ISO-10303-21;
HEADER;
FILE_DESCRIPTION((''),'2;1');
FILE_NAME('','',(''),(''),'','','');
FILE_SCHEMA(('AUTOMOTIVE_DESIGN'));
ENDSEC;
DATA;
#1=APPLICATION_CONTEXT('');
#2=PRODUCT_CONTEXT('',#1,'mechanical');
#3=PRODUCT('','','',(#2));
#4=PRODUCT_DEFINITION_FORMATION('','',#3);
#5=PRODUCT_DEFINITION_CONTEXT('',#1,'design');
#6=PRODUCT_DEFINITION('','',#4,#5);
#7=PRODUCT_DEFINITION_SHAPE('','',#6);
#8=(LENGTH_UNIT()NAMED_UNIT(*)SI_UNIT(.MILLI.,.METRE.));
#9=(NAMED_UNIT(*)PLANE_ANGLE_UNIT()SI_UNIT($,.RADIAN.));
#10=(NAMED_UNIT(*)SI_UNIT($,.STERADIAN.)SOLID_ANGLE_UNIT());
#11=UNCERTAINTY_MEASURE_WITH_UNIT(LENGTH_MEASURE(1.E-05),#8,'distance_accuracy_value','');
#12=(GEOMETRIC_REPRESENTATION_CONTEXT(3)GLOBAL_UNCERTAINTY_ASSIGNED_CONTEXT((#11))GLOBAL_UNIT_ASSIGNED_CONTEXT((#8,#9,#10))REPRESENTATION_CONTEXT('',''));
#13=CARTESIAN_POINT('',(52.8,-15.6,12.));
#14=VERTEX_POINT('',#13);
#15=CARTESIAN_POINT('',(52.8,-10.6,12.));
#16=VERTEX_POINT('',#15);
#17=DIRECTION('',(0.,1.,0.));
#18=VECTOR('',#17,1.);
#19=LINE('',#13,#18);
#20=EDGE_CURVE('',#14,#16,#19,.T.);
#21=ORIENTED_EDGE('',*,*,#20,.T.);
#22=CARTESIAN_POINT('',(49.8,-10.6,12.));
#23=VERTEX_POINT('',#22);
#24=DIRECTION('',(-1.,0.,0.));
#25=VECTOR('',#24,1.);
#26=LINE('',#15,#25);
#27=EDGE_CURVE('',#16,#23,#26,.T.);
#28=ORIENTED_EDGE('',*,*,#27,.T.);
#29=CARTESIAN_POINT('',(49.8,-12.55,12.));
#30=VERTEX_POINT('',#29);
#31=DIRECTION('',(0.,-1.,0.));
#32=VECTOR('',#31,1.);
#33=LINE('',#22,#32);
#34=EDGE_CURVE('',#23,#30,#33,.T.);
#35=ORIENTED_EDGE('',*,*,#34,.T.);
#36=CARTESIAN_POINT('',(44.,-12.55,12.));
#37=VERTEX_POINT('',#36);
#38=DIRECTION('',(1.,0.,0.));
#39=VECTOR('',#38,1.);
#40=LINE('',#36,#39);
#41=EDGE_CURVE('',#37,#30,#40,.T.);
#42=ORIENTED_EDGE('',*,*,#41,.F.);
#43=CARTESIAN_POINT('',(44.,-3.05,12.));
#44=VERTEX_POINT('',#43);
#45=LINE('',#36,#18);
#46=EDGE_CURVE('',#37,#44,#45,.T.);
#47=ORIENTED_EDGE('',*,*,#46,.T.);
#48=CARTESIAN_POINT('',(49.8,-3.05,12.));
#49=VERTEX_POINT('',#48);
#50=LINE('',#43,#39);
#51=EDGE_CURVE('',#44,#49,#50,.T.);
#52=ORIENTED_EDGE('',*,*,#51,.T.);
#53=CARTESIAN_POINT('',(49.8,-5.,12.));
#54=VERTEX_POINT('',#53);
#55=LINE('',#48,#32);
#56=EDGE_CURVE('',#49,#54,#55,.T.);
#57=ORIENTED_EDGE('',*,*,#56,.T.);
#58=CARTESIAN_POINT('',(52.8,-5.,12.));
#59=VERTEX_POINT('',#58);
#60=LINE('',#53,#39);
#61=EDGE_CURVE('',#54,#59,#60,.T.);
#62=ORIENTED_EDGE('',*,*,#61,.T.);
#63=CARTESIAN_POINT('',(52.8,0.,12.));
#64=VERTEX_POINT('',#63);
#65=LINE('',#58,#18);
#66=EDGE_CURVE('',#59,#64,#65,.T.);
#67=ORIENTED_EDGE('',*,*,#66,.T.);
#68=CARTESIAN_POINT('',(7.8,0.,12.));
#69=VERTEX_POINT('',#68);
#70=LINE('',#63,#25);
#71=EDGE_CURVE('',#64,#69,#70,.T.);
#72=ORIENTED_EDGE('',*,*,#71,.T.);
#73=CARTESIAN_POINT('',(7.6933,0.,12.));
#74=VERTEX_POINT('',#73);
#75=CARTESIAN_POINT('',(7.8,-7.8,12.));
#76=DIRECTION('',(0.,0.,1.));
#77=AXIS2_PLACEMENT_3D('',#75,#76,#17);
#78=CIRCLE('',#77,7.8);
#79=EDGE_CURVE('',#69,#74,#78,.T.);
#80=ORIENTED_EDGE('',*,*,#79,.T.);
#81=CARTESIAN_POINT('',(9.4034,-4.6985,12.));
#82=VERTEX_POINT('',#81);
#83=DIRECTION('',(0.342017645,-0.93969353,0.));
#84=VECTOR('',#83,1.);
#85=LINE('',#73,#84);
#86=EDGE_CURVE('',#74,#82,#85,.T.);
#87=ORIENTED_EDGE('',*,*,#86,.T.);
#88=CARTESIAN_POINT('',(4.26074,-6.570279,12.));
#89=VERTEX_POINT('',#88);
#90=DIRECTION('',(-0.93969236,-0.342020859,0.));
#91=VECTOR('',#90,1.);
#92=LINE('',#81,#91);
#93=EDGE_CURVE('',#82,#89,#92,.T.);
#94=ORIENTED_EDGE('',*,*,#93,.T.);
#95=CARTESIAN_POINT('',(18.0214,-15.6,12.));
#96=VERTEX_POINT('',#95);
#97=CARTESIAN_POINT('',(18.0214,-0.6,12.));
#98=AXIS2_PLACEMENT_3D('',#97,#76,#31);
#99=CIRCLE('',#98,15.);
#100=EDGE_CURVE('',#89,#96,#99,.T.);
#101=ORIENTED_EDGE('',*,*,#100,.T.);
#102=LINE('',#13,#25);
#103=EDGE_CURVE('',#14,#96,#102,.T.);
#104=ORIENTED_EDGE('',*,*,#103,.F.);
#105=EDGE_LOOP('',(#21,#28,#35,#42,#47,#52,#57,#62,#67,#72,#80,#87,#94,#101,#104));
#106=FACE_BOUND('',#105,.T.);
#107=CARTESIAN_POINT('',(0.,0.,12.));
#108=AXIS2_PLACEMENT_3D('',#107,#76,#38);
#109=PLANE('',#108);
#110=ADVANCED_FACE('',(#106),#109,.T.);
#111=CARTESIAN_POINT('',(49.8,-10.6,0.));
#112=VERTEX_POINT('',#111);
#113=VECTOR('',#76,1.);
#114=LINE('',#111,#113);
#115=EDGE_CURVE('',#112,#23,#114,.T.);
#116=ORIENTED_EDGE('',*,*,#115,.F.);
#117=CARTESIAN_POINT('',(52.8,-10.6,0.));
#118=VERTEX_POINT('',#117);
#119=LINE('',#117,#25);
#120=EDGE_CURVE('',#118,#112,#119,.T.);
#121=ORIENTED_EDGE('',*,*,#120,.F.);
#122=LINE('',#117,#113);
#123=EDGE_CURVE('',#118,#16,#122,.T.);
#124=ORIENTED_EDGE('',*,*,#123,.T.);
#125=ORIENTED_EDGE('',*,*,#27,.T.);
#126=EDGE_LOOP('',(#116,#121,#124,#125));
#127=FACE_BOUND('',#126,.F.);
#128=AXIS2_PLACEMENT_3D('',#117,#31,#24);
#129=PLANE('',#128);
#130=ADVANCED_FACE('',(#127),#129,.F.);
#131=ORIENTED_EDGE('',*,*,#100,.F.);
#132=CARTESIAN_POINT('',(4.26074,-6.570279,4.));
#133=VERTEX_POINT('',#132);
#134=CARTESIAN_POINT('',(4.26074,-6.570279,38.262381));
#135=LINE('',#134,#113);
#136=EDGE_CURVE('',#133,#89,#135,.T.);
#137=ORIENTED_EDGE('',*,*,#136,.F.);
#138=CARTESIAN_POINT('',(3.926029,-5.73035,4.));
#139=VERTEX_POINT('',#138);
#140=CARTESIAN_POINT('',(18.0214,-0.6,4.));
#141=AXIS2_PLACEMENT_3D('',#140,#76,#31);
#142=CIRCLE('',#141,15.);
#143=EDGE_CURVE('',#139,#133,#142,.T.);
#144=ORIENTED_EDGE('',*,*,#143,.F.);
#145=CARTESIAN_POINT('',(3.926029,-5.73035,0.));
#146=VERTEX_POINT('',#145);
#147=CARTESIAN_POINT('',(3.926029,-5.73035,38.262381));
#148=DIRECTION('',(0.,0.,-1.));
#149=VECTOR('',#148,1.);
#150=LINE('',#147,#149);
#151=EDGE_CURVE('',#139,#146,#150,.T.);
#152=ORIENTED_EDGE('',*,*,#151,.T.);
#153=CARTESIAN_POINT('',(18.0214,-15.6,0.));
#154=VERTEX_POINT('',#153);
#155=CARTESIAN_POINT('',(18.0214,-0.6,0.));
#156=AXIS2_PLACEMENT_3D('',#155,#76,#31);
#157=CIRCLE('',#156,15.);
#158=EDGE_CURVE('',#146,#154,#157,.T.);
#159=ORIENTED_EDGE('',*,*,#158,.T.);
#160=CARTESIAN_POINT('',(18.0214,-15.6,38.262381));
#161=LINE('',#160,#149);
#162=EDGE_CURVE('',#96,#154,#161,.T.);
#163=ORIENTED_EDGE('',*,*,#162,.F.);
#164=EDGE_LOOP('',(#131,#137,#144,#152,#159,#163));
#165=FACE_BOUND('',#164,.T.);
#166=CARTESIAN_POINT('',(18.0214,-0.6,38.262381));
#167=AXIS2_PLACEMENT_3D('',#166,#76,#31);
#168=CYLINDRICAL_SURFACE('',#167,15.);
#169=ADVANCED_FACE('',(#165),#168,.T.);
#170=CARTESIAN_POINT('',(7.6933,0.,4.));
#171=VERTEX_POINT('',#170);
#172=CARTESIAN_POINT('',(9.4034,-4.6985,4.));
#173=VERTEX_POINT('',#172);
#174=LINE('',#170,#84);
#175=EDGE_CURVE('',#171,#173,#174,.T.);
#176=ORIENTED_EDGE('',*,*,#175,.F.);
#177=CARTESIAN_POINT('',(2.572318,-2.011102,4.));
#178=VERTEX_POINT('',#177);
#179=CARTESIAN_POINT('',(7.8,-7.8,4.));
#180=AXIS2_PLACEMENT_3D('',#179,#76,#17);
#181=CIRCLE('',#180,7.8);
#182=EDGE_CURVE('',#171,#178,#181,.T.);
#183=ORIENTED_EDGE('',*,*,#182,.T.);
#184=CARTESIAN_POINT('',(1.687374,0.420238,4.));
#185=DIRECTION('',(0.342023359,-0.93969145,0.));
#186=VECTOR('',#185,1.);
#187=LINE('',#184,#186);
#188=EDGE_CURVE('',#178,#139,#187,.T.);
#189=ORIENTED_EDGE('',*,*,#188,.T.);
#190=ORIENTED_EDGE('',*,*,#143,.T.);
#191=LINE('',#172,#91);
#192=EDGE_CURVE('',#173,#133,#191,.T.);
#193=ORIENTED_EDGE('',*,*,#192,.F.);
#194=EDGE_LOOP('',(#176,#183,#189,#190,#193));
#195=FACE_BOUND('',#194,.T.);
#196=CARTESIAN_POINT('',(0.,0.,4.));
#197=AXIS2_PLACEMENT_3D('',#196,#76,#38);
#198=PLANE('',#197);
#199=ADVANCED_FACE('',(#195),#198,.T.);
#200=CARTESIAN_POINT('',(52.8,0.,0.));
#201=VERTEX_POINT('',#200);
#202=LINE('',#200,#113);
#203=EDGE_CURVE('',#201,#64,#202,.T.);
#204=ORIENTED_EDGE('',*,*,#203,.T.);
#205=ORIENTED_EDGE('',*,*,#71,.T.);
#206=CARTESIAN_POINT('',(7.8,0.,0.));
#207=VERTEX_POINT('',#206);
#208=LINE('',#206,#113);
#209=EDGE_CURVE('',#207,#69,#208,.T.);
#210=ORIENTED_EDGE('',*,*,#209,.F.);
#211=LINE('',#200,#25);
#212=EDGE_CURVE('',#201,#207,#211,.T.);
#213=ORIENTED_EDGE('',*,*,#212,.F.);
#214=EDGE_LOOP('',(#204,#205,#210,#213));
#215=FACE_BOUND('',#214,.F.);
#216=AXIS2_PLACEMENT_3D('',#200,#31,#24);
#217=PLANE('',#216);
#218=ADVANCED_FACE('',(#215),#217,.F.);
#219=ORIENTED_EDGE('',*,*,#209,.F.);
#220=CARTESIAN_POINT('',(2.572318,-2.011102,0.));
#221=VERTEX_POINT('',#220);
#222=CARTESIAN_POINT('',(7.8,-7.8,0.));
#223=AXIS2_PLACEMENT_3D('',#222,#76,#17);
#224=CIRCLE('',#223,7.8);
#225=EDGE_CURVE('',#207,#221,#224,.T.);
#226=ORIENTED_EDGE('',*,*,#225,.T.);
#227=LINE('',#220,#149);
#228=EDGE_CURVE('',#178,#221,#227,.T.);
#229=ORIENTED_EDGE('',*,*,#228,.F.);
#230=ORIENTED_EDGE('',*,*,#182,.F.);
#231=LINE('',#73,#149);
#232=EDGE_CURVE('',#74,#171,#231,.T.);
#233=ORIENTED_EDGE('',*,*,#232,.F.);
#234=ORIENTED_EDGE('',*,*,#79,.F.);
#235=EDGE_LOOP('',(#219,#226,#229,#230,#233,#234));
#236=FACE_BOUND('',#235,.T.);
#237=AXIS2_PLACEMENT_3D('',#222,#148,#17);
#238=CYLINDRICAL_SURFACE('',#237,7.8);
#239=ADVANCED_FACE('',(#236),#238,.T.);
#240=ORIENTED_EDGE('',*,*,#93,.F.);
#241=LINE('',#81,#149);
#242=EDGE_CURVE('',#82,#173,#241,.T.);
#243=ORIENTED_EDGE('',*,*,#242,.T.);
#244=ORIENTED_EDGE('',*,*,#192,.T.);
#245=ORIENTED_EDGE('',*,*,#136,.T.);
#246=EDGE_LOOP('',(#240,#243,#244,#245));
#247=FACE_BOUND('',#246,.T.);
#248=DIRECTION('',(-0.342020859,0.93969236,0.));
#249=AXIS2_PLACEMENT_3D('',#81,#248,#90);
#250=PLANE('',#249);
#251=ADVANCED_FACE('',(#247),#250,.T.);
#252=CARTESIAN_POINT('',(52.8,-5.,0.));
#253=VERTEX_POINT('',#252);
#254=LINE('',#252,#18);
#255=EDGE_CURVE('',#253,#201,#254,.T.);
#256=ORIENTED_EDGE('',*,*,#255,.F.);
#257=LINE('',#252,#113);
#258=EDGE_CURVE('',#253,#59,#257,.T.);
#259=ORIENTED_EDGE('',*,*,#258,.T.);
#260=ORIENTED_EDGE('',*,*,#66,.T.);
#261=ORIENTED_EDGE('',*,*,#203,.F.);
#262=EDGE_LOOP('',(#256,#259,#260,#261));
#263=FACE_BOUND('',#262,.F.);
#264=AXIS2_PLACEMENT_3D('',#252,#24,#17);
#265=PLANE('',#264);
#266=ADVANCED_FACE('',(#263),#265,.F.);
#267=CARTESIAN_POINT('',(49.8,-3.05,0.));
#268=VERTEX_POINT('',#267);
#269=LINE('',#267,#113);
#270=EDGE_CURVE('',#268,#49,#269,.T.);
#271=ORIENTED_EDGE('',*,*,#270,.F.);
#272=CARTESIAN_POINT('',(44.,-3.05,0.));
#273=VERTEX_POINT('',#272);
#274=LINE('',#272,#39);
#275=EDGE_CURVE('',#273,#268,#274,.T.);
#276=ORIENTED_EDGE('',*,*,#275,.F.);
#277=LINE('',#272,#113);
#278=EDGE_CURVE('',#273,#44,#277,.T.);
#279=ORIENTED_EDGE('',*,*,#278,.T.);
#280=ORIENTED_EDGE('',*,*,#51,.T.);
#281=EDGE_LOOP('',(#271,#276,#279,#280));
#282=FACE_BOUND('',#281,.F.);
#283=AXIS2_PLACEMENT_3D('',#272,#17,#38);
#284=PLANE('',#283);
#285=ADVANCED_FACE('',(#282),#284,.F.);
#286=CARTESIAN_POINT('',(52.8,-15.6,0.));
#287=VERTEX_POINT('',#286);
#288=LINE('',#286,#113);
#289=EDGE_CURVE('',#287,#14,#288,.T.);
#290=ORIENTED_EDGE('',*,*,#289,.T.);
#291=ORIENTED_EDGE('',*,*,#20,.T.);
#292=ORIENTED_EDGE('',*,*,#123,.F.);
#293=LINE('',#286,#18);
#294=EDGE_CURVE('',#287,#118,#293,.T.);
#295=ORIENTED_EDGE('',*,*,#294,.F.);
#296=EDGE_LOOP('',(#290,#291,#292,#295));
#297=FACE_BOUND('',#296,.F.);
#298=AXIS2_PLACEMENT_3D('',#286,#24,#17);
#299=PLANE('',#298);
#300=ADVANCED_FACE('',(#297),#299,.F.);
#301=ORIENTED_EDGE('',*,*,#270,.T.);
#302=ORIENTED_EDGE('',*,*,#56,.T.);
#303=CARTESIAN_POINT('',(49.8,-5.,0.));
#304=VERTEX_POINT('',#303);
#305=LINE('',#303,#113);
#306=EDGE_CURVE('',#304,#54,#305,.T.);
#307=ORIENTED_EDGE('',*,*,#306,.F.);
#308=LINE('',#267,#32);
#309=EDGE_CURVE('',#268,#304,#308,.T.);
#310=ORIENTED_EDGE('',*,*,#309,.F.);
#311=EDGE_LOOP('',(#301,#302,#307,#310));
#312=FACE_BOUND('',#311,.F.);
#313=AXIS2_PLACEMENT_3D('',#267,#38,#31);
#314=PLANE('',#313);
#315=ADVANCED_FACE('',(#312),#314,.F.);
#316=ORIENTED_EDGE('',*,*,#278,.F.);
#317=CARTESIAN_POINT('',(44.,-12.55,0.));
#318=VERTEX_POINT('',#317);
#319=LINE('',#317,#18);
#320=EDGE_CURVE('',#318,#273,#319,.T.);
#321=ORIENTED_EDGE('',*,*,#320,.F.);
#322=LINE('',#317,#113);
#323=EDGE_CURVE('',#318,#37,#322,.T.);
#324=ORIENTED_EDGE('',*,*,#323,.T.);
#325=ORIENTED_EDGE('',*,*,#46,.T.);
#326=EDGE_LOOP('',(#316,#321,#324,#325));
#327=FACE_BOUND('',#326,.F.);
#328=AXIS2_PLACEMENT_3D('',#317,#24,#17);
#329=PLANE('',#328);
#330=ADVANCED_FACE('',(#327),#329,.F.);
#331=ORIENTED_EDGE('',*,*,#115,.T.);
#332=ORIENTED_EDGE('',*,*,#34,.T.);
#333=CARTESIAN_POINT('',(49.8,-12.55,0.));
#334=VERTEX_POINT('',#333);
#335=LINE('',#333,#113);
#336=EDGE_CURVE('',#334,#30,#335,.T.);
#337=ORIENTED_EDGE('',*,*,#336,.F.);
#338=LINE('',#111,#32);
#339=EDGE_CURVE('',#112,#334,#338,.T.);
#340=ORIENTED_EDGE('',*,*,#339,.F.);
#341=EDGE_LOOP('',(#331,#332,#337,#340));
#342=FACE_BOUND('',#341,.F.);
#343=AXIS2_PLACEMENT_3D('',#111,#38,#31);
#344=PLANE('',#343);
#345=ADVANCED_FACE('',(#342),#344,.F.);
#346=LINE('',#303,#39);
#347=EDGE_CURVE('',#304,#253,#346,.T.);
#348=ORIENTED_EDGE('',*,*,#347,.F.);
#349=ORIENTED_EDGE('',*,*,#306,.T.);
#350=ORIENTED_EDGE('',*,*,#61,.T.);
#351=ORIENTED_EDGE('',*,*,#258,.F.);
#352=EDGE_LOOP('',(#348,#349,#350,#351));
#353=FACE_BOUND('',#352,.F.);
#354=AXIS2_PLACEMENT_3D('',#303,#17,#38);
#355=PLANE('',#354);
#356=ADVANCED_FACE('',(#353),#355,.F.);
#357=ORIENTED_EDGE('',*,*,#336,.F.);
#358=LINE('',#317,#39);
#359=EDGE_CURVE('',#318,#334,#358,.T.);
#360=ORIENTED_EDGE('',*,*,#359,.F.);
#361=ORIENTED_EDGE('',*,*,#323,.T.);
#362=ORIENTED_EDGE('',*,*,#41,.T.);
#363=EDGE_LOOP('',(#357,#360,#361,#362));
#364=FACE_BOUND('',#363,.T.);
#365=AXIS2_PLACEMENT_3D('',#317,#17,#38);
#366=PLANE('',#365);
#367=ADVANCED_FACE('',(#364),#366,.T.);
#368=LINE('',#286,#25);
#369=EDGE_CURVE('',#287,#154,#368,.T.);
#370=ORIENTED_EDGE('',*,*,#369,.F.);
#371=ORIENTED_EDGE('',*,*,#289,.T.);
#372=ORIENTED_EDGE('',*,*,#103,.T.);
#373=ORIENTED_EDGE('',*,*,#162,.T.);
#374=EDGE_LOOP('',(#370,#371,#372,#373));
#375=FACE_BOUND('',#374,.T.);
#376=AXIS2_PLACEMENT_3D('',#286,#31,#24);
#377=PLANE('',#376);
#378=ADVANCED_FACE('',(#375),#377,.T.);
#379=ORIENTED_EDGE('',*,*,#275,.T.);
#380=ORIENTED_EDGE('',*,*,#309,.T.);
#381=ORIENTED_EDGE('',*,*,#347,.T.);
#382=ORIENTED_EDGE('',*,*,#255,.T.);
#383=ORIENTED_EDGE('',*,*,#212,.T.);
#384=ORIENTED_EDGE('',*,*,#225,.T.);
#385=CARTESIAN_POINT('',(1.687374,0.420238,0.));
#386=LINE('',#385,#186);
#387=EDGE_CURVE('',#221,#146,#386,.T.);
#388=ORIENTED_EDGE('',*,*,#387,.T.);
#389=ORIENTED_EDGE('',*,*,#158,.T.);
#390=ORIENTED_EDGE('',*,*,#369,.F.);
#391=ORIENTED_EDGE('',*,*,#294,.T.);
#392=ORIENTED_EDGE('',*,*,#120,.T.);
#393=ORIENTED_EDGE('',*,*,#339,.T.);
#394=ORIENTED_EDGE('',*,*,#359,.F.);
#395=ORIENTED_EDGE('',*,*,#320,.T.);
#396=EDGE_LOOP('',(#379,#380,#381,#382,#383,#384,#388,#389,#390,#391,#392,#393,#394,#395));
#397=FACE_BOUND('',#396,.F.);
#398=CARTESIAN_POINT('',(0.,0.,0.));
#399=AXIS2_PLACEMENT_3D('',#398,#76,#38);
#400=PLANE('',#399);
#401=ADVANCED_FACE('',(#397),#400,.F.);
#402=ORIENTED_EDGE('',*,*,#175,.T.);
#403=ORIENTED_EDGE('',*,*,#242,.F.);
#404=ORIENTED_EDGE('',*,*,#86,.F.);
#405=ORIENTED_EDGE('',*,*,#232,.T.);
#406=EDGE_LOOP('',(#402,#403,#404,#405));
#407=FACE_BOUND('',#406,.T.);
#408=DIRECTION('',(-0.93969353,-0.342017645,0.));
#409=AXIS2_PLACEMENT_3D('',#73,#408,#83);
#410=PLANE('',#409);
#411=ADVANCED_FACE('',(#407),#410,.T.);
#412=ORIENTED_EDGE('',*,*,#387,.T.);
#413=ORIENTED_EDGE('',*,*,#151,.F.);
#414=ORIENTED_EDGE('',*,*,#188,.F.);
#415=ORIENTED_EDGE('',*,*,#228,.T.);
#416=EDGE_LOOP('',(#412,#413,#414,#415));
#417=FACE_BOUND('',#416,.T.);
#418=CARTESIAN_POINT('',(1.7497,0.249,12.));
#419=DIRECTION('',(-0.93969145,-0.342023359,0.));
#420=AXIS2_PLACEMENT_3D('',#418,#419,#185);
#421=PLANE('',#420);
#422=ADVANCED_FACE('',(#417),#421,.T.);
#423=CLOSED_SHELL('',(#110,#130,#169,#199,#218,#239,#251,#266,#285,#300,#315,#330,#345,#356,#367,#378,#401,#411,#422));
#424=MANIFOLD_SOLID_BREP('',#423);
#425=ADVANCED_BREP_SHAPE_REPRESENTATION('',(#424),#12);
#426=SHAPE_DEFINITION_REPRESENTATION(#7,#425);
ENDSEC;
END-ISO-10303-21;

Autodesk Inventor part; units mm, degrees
ref_plane "YZ Plane" through (0, 0, 0) normal (1, 0, 0) x (0, 1, 0)
ref_plane "XZ Plane" through (0, 0, 0) normal (0, 1, 0) x (-1, 0, 0)
ref_plane "XY Plane" through (0, 0, 0) normal (0, 0, 1) x (1, 0, 0)
sketch "Sketch5" plane through (0, 0, 0) normal (0, 0, 1) x (1, 0, 0)
  line L0 (52.8, -15.6) -> (52.8, -10.6)
  line L1 (52.8, -10.6) -> (49.8, -10.6)
  line L2 (49.8, -10.6) -> (49.8, -12.55)
  line L3 (44, -12.55) -> (44, -3.05)
  line L4 (49.8, -3.05) -> (49.8, -5)
  line L5 (49.8, -5) -> (52.8, -5)
  line L6 (52.8, -5) -> (52.8, 0)
  line L7 (52.8, 0) -> (7.8, 0)
  line L8 (44, -3.05) -> (49.8, -3.05)
  line L9 (44, -12.55) -> (49.8, -12.55)
  line L10 (52.8, -15.6) -> (7.8, -15.6)
  arc A0 (7.8, 0) -> (7.8, -15.6) centre (7.8, -7.8) ccw
  point P0 (0, 0)
  dimension "d41" = 5.8
  dimension "d48" = 44
  dimension "d63" = 45
  dimension "d67" = 15.6
  dimension "d71" = 0
  dimension "d72" = 36.2
  dimension "d85" = 5.6
  dimension "d86" = 9.5
  dimension "d87" = 3
extrude "Extrusion2" add sketch "Sketch5" along normal blind 12
sketch "Sketch9" plane through (0, 0, 12) normal (0, 0, 1) x (1, 0, 0)
  line L0 (52.8, 0) -> (7.8, 0) projected
  line L1 (7.6933, 0) -> (9.4034, -4.6985)
  line L2 (9.4034, -4.6985) -> (0.0065, -8.1187)
  arc A0 (7.8, 0) -> (7.8, -15.6) centre (7.8, -7.8) ccw projected
  point P0 (0, 0)
  point P1 (7.6936, -0.0007)
  dimension "d89" = 5
  dimension "d92" = 110
  dimension "d93" = 10
extrude "Extrusion6" cut sketch "Sketch9" against normal blind 8 from surface at 0
sketch "Sketch11" plane through (0, 0, 12) normal (0, 0, 1) x (1, 0, 0)
  line L0 (1.7497, 0.249) -> (7.6768, -16.0354)
  line L1 (7.6768, -16.0354) -> (-2.2601, -19.6521)
  line L2 (-2.2601, -19.6521) -> (-8.1871, -3.3677)
  line L3 (-8.1871, -3.3677) -> (1.7497, 0.249)
  line L4 (7.6936, -0.0007) -> (9.4034, -4.6985) projected
  point P0 (0, 0)
  dimension "d98" = 5.5
extrude "Extrusion8" cut sketch "Sketch11" against normal through all
fillet "Fillet2" radius 15 1 edges at (7.5164, -15.5948, 6)
sketch "Sketch12" plane through (0, 0, 12) normal (0, 0, 1) x (1, 0, 0)
  point P0 (0, 0)
equation "\"l1\" = 8"
properties part number "Finray_test_8_Kerbe_20deg_V4_links"
